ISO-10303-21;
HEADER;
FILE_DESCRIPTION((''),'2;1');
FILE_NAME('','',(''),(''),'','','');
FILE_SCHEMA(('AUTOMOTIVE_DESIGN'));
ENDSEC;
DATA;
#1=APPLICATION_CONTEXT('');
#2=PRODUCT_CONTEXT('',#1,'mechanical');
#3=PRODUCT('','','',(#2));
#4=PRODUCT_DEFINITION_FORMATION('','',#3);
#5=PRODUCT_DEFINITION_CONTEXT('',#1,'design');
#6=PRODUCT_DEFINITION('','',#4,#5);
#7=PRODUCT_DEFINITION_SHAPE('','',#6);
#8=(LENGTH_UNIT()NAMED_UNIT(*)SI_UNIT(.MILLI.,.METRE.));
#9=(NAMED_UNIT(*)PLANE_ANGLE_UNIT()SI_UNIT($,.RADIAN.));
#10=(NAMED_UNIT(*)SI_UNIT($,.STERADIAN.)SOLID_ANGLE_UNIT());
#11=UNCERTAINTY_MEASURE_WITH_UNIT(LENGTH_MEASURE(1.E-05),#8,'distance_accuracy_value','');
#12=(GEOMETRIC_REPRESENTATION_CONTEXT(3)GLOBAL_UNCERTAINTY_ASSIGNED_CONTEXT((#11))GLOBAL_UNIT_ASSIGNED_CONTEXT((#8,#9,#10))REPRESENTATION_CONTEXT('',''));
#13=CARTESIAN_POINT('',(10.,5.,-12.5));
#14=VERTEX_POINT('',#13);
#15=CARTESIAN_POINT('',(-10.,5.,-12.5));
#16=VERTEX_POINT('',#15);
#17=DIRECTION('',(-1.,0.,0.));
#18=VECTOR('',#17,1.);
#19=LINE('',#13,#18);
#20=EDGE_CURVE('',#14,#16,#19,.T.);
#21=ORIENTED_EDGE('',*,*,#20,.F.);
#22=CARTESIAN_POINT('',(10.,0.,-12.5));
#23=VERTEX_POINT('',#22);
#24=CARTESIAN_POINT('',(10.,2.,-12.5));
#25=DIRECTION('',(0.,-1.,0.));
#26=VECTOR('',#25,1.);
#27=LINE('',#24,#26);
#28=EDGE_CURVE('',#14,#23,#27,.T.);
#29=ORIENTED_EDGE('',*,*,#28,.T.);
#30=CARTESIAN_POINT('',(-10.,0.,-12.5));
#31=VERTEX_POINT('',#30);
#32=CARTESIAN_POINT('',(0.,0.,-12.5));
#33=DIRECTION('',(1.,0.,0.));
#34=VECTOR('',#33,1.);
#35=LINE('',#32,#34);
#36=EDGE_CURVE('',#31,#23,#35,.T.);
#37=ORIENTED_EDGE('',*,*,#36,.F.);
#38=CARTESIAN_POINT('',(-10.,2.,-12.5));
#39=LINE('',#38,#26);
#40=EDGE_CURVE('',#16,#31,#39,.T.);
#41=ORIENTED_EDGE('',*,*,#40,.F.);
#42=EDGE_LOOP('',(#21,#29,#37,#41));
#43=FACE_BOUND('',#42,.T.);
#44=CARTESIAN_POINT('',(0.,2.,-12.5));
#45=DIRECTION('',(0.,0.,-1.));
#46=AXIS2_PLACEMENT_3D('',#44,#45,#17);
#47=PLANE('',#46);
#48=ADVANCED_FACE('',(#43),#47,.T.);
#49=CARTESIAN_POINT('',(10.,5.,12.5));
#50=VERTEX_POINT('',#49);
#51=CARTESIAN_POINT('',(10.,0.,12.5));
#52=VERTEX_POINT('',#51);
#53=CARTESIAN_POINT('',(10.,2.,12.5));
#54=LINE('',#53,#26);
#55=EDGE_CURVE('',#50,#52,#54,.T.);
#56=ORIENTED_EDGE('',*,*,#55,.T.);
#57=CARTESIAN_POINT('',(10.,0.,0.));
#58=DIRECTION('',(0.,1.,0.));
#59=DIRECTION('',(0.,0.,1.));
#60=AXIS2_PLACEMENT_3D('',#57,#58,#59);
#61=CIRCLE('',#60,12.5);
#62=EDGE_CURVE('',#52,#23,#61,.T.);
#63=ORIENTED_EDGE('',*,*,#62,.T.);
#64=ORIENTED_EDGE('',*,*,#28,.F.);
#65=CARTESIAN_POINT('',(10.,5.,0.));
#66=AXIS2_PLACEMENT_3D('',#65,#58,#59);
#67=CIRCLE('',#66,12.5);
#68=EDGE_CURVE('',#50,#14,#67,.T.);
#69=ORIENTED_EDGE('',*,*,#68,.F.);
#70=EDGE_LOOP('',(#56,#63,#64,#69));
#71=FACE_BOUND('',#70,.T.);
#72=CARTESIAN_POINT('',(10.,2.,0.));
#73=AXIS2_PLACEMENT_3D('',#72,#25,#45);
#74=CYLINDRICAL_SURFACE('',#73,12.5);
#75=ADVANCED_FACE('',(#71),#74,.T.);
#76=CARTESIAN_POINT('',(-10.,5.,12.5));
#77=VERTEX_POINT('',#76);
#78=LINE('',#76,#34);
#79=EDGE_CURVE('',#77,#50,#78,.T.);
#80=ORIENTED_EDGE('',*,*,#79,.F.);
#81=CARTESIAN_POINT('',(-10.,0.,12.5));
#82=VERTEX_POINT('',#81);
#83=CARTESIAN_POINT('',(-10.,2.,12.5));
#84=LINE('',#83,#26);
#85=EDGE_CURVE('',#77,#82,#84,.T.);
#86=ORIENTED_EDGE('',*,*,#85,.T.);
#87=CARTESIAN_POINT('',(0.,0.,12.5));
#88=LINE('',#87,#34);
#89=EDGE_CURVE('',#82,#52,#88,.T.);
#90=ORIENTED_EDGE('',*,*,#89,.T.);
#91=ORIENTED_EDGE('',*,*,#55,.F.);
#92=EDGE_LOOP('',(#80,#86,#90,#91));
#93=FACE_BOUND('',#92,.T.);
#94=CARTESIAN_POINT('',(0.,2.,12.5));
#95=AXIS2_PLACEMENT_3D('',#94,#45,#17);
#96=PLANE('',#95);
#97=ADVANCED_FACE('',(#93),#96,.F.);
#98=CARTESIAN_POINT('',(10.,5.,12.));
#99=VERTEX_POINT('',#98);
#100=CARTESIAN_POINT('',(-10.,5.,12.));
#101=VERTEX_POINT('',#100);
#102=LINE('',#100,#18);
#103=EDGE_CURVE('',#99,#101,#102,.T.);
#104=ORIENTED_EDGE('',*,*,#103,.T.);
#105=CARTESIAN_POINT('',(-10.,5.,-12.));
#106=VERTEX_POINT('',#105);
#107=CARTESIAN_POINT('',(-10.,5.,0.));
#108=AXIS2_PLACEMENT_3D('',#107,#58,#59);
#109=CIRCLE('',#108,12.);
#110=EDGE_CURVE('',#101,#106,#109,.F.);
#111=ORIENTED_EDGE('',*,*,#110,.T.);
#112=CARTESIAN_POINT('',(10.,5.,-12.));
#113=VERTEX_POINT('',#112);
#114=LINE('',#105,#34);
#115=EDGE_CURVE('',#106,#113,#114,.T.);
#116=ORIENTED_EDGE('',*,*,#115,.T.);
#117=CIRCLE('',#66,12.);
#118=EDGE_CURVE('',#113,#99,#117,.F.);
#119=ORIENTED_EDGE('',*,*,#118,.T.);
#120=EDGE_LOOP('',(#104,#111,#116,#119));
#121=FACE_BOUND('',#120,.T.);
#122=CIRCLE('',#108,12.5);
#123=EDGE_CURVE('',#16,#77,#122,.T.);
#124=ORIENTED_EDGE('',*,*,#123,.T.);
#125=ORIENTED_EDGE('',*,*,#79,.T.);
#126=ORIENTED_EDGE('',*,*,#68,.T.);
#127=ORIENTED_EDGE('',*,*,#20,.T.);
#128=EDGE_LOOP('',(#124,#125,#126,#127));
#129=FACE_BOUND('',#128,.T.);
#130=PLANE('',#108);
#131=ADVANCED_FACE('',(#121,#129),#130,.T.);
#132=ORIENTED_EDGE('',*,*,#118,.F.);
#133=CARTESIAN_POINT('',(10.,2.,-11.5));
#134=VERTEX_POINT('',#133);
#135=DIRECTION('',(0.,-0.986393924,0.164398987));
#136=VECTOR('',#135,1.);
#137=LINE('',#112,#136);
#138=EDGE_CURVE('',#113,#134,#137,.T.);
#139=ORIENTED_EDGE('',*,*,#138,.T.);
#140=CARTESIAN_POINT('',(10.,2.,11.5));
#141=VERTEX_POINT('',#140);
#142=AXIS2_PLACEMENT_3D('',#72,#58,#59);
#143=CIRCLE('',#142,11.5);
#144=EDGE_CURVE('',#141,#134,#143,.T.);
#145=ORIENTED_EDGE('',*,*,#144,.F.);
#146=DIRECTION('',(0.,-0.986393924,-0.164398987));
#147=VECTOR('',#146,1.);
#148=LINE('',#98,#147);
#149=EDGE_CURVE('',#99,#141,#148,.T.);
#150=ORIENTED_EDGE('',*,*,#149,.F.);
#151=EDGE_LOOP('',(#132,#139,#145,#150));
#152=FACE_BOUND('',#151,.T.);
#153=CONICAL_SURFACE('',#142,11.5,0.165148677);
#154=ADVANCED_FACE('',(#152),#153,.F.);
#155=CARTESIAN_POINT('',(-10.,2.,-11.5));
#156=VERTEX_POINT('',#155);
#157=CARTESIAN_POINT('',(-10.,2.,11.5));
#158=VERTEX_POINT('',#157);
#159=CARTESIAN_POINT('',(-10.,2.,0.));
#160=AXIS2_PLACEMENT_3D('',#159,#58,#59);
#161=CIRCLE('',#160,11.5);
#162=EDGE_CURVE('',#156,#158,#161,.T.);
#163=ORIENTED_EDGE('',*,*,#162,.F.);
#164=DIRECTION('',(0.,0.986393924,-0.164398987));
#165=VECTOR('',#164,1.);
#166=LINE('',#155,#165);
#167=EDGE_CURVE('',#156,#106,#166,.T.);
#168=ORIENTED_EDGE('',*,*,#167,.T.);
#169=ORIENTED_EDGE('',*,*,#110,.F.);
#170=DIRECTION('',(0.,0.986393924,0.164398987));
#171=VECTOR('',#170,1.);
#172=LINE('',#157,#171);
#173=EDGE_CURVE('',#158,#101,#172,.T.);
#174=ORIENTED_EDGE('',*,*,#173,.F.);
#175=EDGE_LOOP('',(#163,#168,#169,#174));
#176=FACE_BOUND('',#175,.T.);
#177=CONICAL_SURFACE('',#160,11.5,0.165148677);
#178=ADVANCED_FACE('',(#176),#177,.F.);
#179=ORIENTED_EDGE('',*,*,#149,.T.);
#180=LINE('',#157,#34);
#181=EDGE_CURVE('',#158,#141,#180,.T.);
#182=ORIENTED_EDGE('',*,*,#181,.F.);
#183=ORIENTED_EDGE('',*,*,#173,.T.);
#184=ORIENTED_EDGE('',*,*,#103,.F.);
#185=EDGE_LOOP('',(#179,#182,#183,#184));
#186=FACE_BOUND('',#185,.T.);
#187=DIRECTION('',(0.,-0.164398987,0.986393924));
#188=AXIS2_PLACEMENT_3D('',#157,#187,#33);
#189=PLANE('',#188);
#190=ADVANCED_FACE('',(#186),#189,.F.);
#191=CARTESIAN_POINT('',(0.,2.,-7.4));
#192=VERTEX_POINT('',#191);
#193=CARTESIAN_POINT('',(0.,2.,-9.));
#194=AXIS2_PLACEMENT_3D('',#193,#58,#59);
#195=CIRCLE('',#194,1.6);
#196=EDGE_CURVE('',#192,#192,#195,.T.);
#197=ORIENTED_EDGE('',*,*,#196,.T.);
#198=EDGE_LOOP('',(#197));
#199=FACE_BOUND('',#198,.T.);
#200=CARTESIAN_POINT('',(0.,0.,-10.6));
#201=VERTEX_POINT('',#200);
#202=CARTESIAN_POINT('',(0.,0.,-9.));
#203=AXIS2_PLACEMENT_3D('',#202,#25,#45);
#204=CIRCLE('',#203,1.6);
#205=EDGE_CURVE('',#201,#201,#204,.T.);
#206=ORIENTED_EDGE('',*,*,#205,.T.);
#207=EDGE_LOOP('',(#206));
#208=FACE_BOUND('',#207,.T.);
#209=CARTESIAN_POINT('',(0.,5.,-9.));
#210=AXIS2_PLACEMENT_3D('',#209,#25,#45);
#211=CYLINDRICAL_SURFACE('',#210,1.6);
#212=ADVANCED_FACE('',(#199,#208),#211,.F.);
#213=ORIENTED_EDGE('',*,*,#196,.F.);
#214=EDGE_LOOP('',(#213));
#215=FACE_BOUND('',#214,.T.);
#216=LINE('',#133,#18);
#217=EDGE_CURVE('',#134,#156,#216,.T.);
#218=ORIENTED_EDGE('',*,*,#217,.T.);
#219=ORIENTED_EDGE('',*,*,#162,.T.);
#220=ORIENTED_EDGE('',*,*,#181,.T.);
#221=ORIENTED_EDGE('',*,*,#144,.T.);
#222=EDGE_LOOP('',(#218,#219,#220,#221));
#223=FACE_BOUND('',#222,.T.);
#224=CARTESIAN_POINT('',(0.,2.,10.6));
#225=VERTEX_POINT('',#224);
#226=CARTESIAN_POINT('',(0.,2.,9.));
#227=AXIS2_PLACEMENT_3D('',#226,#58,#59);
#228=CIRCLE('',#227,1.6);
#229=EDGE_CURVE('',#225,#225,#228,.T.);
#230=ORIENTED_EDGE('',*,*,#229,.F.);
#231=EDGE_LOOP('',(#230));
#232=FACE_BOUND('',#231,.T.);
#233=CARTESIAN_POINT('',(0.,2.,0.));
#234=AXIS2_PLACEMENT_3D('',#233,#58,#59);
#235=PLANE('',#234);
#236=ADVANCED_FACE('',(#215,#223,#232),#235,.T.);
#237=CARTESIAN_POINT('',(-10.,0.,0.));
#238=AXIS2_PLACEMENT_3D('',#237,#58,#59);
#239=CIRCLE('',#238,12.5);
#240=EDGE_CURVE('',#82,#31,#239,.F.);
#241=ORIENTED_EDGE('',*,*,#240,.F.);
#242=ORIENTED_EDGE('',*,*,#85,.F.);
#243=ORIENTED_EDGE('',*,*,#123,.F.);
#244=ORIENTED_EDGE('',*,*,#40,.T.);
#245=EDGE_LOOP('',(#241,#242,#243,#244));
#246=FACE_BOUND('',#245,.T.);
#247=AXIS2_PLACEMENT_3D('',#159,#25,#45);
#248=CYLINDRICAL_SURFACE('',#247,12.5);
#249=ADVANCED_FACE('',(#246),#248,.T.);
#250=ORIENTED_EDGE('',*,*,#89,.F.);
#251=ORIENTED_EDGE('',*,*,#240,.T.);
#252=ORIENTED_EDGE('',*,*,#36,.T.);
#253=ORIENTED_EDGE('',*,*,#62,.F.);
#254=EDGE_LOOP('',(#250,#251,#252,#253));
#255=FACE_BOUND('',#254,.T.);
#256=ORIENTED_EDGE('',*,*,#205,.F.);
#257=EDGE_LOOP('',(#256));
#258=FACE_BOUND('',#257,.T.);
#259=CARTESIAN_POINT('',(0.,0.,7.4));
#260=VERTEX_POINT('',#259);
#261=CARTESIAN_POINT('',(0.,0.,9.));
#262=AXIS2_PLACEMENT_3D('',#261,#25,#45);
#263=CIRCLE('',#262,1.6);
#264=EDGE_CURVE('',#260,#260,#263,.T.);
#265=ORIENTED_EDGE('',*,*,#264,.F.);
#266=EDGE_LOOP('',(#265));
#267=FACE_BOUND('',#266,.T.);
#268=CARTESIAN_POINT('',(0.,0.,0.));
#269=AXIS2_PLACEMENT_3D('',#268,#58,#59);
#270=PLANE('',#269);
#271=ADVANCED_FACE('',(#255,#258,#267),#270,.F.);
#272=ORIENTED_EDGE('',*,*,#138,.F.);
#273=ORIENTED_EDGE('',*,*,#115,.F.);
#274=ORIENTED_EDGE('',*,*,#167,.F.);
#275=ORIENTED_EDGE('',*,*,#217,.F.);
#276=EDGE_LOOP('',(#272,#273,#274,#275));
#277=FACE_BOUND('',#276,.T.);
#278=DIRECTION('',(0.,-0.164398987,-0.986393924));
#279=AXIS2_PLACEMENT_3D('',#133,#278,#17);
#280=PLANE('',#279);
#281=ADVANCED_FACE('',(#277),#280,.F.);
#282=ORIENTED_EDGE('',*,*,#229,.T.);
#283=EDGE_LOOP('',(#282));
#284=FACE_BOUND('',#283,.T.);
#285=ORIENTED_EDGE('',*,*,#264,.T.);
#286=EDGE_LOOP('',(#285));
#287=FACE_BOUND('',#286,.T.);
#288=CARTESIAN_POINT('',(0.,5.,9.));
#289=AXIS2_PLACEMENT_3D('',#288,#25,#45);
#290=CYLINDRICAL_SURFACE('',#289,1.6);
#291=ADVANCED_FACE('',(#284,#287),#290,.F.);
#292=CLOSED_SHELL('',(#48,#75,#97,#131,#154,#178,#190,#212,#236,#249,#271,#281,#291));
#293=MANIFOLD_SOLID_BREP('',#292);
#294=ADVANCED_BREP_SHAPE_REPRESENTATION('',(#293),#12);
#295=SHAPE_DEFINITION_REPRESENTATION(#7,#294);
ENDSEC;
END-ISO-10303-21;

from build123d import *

# Parameters (mm, degrees)
BOSS_EXTRUDE1_DEPTH = 2
BOSS_EXTRUDE2_DEPTH = 3
CHAMFER1_SIZE       = 0.5
CHAMFER1_SIZE_2     = 3
SKETCH3_R           = 1.6
CUT_EXTRUDE1_DEPTH  = 27.220221204


with BuildPart() as part:
    # Sketch1 → Boss-Extrude1 (new body)
    with BuildSketch(Plane(origin=(0, 0, 0), x_dir=(1, 0, 0), z_dir=(0, 1, 0))):
        with BuildLine():
            Line((-10, 12.5), (10, 12.5))
            ThreePointArc((10, 12.5), (22.5, 0), (10, -12.5))
            Line((10, -12.5), (-10, -12.5))
            ThreePointArc((-10, -12.5), (-22.5, 0), (-10, 12.5))
        make_face()
    extrude(amount=BOSS_EXTRUDE1_DEPTH)

    # Sketch2 → Boss-Extrude2 (add)
    with BuildSketch(Plane(origin=(0, 2, 0), x_dir=(1, 0, 0), z_dir=(0, 1, 0))):
        with BuildLine():
            Line((10, 12.5), (-10, 12.5))
            ThreePointArc((-10, 12.5), (-22.5, 0), (-10, -12.5))
            Line((-10, -12.5), (10, -12.5))
            ThreePointArc((10, -12.5), (22.5, 0), (10, 12.5))
        make_face()
        with BuildLine():
            Line((-10, -11.5), (10, -11.5))
            ThreePointArc((10, -11.5), (21.5, 0), (10, 11.5))
            Line((10, 11.5), (-10, 11.5))
            ThreePointArc((-10, 11.5), (-21.5, 0), (-10, -11.5))
        make_face(mode=Mode.SUBTRACT)
    extrude(amount=BOSS_EXTRUDE2_DEPTH)

    # Chamfer1
    # the kernel refuses this chamfer: 3, 0.5 mm, written as the material it takes off along each edge
    with BuildSketch(Plane(origin=(-10, 5, 11.5), x_dir=(0, 0.2220622368174743, 0.9750324932942593), z_dir=(1, 0, 0))) as chamfer1_piece_1_section:
        Polygon((CHAMFER1_SIZE * 0.975032493294, CHAMFER1_SIZE * 0.222062236817), (-CHAMFER1_SIZE_2 * 0.222062236817, CHAMFER1_SIZE_2 * 0.975032493294), (0, 0), align=None)
    chamfer1_piece_1 = extrude(amount=20, mode=Mode.PRIVATE)
    chamfer1_piece_1 = split(chamfer1_piece_1, bisect_by=Plane(origin=(0, 2, 11.634388756), z_dir=(0, 1, 0)), keep=Keep.TOP, mode=Mode.PRIVATE)
    add(chamfer1_piece_1, mode=Mode.SUBTRACT)
    with BuildSketch(Plane(origin=(10, 5, 0), x_dir=(0, 0, 1), z_dir=(-1, 0, 0))) as chamfer1_piece_2_section:
        Polygon((11.5 + CHAMFER1_SIZE, 0), (11.5, -CHAMFER1_SIZE_2), (11.5, 0), align=None)
    chamfer1_piece_2 = revolve(axis=Axis((10, 5, 0), (0, 1, 0)), revolution_arc=180, mode=Mode.PRIVATE)
    chamfer1_piece_2 = split(chamfer1_piece_2, bisect_by=Plane(origin=(21.727349814, 2, 0), z_dir=(0, 1, 0)), keep=Keep.TOP, mode=Mode.PRIVATE)
    add(chamfer1_piece_2, mode=Mode.SUBTRACT)
    with BuildSketch(Plane(origin=(10, 5, -11.5), x_dir=(0, 0.2220622368174743, -0.9750324932942593), z_dir=(-1, 0, 0))) as chamfer1_piece_3_section:
        Polygon((CHAMFER1_SIZE * 0.975032493294, CHAMFER1_SIZE * 0.222062236817), (-CHAMFER1_SIZE_2 * 0.222062236817, CHAMFER1_SIZE_2 * 0.975032493294), (0, 0), align=None)
    chamfer1_piece_3 = extrude(amount=20, mode=Mode.PRIVATE)
    chamfer1_piece_3 = split(chamfer1_piece_3, bisect_by=Plane(origin=(0, 2, -11.634388756), z_dir=(0, 1, 0)), keep=Keep.TOP, mode=Mode.PRIVATE)
    add(chamfer1_piece_3, mode=Mode.SUBTRACT)
    with BuildSketch(Plane(origin=(-10, 5, 0), x_dir=(0, 0, -1), z_dir=(1, 0, 0))) as chamfer1_piece_4_section:
        Polygon((11.5 + CHAMFER1_SIZE, 0), (11.5, -CHAMFER1_SIZE_2), (11.5, 0), align=None)
    chamfer1_piece_4 = revolve(axis=Axis((-10, 5, 0), (0, 1, 0)), revolution_arc=180, mode=Mode.PRIVATE)
    chamfer1_piece_4 = split(chamfer1_piece_4, bisect_by=Plane(origin=(-21.727349812, 2, 0), z_dir=(0, 1, 0)), keep=Keep.TOP, mode=Mode.PRIVATE)
    add(chamfer1_piece_4, mode=Mode.SUBTRACT)

    # Sketch3 → Cut-Extrude1 (cut, through all)
    with BuildSketch(Plane.XZ):
        with Locations(Location((0, -9, 0), (0, 0, 270))):
            Circle(SKETCH3_R)
        with Locations(Location((0, 9, 0), (0, 0, 270))):
            Circle(SKETCH3_R)
    extrude(amount=-CUT_EXTRUDE1_DEPTH, mode=Mode.SUBTRACT)


solid = part.part
